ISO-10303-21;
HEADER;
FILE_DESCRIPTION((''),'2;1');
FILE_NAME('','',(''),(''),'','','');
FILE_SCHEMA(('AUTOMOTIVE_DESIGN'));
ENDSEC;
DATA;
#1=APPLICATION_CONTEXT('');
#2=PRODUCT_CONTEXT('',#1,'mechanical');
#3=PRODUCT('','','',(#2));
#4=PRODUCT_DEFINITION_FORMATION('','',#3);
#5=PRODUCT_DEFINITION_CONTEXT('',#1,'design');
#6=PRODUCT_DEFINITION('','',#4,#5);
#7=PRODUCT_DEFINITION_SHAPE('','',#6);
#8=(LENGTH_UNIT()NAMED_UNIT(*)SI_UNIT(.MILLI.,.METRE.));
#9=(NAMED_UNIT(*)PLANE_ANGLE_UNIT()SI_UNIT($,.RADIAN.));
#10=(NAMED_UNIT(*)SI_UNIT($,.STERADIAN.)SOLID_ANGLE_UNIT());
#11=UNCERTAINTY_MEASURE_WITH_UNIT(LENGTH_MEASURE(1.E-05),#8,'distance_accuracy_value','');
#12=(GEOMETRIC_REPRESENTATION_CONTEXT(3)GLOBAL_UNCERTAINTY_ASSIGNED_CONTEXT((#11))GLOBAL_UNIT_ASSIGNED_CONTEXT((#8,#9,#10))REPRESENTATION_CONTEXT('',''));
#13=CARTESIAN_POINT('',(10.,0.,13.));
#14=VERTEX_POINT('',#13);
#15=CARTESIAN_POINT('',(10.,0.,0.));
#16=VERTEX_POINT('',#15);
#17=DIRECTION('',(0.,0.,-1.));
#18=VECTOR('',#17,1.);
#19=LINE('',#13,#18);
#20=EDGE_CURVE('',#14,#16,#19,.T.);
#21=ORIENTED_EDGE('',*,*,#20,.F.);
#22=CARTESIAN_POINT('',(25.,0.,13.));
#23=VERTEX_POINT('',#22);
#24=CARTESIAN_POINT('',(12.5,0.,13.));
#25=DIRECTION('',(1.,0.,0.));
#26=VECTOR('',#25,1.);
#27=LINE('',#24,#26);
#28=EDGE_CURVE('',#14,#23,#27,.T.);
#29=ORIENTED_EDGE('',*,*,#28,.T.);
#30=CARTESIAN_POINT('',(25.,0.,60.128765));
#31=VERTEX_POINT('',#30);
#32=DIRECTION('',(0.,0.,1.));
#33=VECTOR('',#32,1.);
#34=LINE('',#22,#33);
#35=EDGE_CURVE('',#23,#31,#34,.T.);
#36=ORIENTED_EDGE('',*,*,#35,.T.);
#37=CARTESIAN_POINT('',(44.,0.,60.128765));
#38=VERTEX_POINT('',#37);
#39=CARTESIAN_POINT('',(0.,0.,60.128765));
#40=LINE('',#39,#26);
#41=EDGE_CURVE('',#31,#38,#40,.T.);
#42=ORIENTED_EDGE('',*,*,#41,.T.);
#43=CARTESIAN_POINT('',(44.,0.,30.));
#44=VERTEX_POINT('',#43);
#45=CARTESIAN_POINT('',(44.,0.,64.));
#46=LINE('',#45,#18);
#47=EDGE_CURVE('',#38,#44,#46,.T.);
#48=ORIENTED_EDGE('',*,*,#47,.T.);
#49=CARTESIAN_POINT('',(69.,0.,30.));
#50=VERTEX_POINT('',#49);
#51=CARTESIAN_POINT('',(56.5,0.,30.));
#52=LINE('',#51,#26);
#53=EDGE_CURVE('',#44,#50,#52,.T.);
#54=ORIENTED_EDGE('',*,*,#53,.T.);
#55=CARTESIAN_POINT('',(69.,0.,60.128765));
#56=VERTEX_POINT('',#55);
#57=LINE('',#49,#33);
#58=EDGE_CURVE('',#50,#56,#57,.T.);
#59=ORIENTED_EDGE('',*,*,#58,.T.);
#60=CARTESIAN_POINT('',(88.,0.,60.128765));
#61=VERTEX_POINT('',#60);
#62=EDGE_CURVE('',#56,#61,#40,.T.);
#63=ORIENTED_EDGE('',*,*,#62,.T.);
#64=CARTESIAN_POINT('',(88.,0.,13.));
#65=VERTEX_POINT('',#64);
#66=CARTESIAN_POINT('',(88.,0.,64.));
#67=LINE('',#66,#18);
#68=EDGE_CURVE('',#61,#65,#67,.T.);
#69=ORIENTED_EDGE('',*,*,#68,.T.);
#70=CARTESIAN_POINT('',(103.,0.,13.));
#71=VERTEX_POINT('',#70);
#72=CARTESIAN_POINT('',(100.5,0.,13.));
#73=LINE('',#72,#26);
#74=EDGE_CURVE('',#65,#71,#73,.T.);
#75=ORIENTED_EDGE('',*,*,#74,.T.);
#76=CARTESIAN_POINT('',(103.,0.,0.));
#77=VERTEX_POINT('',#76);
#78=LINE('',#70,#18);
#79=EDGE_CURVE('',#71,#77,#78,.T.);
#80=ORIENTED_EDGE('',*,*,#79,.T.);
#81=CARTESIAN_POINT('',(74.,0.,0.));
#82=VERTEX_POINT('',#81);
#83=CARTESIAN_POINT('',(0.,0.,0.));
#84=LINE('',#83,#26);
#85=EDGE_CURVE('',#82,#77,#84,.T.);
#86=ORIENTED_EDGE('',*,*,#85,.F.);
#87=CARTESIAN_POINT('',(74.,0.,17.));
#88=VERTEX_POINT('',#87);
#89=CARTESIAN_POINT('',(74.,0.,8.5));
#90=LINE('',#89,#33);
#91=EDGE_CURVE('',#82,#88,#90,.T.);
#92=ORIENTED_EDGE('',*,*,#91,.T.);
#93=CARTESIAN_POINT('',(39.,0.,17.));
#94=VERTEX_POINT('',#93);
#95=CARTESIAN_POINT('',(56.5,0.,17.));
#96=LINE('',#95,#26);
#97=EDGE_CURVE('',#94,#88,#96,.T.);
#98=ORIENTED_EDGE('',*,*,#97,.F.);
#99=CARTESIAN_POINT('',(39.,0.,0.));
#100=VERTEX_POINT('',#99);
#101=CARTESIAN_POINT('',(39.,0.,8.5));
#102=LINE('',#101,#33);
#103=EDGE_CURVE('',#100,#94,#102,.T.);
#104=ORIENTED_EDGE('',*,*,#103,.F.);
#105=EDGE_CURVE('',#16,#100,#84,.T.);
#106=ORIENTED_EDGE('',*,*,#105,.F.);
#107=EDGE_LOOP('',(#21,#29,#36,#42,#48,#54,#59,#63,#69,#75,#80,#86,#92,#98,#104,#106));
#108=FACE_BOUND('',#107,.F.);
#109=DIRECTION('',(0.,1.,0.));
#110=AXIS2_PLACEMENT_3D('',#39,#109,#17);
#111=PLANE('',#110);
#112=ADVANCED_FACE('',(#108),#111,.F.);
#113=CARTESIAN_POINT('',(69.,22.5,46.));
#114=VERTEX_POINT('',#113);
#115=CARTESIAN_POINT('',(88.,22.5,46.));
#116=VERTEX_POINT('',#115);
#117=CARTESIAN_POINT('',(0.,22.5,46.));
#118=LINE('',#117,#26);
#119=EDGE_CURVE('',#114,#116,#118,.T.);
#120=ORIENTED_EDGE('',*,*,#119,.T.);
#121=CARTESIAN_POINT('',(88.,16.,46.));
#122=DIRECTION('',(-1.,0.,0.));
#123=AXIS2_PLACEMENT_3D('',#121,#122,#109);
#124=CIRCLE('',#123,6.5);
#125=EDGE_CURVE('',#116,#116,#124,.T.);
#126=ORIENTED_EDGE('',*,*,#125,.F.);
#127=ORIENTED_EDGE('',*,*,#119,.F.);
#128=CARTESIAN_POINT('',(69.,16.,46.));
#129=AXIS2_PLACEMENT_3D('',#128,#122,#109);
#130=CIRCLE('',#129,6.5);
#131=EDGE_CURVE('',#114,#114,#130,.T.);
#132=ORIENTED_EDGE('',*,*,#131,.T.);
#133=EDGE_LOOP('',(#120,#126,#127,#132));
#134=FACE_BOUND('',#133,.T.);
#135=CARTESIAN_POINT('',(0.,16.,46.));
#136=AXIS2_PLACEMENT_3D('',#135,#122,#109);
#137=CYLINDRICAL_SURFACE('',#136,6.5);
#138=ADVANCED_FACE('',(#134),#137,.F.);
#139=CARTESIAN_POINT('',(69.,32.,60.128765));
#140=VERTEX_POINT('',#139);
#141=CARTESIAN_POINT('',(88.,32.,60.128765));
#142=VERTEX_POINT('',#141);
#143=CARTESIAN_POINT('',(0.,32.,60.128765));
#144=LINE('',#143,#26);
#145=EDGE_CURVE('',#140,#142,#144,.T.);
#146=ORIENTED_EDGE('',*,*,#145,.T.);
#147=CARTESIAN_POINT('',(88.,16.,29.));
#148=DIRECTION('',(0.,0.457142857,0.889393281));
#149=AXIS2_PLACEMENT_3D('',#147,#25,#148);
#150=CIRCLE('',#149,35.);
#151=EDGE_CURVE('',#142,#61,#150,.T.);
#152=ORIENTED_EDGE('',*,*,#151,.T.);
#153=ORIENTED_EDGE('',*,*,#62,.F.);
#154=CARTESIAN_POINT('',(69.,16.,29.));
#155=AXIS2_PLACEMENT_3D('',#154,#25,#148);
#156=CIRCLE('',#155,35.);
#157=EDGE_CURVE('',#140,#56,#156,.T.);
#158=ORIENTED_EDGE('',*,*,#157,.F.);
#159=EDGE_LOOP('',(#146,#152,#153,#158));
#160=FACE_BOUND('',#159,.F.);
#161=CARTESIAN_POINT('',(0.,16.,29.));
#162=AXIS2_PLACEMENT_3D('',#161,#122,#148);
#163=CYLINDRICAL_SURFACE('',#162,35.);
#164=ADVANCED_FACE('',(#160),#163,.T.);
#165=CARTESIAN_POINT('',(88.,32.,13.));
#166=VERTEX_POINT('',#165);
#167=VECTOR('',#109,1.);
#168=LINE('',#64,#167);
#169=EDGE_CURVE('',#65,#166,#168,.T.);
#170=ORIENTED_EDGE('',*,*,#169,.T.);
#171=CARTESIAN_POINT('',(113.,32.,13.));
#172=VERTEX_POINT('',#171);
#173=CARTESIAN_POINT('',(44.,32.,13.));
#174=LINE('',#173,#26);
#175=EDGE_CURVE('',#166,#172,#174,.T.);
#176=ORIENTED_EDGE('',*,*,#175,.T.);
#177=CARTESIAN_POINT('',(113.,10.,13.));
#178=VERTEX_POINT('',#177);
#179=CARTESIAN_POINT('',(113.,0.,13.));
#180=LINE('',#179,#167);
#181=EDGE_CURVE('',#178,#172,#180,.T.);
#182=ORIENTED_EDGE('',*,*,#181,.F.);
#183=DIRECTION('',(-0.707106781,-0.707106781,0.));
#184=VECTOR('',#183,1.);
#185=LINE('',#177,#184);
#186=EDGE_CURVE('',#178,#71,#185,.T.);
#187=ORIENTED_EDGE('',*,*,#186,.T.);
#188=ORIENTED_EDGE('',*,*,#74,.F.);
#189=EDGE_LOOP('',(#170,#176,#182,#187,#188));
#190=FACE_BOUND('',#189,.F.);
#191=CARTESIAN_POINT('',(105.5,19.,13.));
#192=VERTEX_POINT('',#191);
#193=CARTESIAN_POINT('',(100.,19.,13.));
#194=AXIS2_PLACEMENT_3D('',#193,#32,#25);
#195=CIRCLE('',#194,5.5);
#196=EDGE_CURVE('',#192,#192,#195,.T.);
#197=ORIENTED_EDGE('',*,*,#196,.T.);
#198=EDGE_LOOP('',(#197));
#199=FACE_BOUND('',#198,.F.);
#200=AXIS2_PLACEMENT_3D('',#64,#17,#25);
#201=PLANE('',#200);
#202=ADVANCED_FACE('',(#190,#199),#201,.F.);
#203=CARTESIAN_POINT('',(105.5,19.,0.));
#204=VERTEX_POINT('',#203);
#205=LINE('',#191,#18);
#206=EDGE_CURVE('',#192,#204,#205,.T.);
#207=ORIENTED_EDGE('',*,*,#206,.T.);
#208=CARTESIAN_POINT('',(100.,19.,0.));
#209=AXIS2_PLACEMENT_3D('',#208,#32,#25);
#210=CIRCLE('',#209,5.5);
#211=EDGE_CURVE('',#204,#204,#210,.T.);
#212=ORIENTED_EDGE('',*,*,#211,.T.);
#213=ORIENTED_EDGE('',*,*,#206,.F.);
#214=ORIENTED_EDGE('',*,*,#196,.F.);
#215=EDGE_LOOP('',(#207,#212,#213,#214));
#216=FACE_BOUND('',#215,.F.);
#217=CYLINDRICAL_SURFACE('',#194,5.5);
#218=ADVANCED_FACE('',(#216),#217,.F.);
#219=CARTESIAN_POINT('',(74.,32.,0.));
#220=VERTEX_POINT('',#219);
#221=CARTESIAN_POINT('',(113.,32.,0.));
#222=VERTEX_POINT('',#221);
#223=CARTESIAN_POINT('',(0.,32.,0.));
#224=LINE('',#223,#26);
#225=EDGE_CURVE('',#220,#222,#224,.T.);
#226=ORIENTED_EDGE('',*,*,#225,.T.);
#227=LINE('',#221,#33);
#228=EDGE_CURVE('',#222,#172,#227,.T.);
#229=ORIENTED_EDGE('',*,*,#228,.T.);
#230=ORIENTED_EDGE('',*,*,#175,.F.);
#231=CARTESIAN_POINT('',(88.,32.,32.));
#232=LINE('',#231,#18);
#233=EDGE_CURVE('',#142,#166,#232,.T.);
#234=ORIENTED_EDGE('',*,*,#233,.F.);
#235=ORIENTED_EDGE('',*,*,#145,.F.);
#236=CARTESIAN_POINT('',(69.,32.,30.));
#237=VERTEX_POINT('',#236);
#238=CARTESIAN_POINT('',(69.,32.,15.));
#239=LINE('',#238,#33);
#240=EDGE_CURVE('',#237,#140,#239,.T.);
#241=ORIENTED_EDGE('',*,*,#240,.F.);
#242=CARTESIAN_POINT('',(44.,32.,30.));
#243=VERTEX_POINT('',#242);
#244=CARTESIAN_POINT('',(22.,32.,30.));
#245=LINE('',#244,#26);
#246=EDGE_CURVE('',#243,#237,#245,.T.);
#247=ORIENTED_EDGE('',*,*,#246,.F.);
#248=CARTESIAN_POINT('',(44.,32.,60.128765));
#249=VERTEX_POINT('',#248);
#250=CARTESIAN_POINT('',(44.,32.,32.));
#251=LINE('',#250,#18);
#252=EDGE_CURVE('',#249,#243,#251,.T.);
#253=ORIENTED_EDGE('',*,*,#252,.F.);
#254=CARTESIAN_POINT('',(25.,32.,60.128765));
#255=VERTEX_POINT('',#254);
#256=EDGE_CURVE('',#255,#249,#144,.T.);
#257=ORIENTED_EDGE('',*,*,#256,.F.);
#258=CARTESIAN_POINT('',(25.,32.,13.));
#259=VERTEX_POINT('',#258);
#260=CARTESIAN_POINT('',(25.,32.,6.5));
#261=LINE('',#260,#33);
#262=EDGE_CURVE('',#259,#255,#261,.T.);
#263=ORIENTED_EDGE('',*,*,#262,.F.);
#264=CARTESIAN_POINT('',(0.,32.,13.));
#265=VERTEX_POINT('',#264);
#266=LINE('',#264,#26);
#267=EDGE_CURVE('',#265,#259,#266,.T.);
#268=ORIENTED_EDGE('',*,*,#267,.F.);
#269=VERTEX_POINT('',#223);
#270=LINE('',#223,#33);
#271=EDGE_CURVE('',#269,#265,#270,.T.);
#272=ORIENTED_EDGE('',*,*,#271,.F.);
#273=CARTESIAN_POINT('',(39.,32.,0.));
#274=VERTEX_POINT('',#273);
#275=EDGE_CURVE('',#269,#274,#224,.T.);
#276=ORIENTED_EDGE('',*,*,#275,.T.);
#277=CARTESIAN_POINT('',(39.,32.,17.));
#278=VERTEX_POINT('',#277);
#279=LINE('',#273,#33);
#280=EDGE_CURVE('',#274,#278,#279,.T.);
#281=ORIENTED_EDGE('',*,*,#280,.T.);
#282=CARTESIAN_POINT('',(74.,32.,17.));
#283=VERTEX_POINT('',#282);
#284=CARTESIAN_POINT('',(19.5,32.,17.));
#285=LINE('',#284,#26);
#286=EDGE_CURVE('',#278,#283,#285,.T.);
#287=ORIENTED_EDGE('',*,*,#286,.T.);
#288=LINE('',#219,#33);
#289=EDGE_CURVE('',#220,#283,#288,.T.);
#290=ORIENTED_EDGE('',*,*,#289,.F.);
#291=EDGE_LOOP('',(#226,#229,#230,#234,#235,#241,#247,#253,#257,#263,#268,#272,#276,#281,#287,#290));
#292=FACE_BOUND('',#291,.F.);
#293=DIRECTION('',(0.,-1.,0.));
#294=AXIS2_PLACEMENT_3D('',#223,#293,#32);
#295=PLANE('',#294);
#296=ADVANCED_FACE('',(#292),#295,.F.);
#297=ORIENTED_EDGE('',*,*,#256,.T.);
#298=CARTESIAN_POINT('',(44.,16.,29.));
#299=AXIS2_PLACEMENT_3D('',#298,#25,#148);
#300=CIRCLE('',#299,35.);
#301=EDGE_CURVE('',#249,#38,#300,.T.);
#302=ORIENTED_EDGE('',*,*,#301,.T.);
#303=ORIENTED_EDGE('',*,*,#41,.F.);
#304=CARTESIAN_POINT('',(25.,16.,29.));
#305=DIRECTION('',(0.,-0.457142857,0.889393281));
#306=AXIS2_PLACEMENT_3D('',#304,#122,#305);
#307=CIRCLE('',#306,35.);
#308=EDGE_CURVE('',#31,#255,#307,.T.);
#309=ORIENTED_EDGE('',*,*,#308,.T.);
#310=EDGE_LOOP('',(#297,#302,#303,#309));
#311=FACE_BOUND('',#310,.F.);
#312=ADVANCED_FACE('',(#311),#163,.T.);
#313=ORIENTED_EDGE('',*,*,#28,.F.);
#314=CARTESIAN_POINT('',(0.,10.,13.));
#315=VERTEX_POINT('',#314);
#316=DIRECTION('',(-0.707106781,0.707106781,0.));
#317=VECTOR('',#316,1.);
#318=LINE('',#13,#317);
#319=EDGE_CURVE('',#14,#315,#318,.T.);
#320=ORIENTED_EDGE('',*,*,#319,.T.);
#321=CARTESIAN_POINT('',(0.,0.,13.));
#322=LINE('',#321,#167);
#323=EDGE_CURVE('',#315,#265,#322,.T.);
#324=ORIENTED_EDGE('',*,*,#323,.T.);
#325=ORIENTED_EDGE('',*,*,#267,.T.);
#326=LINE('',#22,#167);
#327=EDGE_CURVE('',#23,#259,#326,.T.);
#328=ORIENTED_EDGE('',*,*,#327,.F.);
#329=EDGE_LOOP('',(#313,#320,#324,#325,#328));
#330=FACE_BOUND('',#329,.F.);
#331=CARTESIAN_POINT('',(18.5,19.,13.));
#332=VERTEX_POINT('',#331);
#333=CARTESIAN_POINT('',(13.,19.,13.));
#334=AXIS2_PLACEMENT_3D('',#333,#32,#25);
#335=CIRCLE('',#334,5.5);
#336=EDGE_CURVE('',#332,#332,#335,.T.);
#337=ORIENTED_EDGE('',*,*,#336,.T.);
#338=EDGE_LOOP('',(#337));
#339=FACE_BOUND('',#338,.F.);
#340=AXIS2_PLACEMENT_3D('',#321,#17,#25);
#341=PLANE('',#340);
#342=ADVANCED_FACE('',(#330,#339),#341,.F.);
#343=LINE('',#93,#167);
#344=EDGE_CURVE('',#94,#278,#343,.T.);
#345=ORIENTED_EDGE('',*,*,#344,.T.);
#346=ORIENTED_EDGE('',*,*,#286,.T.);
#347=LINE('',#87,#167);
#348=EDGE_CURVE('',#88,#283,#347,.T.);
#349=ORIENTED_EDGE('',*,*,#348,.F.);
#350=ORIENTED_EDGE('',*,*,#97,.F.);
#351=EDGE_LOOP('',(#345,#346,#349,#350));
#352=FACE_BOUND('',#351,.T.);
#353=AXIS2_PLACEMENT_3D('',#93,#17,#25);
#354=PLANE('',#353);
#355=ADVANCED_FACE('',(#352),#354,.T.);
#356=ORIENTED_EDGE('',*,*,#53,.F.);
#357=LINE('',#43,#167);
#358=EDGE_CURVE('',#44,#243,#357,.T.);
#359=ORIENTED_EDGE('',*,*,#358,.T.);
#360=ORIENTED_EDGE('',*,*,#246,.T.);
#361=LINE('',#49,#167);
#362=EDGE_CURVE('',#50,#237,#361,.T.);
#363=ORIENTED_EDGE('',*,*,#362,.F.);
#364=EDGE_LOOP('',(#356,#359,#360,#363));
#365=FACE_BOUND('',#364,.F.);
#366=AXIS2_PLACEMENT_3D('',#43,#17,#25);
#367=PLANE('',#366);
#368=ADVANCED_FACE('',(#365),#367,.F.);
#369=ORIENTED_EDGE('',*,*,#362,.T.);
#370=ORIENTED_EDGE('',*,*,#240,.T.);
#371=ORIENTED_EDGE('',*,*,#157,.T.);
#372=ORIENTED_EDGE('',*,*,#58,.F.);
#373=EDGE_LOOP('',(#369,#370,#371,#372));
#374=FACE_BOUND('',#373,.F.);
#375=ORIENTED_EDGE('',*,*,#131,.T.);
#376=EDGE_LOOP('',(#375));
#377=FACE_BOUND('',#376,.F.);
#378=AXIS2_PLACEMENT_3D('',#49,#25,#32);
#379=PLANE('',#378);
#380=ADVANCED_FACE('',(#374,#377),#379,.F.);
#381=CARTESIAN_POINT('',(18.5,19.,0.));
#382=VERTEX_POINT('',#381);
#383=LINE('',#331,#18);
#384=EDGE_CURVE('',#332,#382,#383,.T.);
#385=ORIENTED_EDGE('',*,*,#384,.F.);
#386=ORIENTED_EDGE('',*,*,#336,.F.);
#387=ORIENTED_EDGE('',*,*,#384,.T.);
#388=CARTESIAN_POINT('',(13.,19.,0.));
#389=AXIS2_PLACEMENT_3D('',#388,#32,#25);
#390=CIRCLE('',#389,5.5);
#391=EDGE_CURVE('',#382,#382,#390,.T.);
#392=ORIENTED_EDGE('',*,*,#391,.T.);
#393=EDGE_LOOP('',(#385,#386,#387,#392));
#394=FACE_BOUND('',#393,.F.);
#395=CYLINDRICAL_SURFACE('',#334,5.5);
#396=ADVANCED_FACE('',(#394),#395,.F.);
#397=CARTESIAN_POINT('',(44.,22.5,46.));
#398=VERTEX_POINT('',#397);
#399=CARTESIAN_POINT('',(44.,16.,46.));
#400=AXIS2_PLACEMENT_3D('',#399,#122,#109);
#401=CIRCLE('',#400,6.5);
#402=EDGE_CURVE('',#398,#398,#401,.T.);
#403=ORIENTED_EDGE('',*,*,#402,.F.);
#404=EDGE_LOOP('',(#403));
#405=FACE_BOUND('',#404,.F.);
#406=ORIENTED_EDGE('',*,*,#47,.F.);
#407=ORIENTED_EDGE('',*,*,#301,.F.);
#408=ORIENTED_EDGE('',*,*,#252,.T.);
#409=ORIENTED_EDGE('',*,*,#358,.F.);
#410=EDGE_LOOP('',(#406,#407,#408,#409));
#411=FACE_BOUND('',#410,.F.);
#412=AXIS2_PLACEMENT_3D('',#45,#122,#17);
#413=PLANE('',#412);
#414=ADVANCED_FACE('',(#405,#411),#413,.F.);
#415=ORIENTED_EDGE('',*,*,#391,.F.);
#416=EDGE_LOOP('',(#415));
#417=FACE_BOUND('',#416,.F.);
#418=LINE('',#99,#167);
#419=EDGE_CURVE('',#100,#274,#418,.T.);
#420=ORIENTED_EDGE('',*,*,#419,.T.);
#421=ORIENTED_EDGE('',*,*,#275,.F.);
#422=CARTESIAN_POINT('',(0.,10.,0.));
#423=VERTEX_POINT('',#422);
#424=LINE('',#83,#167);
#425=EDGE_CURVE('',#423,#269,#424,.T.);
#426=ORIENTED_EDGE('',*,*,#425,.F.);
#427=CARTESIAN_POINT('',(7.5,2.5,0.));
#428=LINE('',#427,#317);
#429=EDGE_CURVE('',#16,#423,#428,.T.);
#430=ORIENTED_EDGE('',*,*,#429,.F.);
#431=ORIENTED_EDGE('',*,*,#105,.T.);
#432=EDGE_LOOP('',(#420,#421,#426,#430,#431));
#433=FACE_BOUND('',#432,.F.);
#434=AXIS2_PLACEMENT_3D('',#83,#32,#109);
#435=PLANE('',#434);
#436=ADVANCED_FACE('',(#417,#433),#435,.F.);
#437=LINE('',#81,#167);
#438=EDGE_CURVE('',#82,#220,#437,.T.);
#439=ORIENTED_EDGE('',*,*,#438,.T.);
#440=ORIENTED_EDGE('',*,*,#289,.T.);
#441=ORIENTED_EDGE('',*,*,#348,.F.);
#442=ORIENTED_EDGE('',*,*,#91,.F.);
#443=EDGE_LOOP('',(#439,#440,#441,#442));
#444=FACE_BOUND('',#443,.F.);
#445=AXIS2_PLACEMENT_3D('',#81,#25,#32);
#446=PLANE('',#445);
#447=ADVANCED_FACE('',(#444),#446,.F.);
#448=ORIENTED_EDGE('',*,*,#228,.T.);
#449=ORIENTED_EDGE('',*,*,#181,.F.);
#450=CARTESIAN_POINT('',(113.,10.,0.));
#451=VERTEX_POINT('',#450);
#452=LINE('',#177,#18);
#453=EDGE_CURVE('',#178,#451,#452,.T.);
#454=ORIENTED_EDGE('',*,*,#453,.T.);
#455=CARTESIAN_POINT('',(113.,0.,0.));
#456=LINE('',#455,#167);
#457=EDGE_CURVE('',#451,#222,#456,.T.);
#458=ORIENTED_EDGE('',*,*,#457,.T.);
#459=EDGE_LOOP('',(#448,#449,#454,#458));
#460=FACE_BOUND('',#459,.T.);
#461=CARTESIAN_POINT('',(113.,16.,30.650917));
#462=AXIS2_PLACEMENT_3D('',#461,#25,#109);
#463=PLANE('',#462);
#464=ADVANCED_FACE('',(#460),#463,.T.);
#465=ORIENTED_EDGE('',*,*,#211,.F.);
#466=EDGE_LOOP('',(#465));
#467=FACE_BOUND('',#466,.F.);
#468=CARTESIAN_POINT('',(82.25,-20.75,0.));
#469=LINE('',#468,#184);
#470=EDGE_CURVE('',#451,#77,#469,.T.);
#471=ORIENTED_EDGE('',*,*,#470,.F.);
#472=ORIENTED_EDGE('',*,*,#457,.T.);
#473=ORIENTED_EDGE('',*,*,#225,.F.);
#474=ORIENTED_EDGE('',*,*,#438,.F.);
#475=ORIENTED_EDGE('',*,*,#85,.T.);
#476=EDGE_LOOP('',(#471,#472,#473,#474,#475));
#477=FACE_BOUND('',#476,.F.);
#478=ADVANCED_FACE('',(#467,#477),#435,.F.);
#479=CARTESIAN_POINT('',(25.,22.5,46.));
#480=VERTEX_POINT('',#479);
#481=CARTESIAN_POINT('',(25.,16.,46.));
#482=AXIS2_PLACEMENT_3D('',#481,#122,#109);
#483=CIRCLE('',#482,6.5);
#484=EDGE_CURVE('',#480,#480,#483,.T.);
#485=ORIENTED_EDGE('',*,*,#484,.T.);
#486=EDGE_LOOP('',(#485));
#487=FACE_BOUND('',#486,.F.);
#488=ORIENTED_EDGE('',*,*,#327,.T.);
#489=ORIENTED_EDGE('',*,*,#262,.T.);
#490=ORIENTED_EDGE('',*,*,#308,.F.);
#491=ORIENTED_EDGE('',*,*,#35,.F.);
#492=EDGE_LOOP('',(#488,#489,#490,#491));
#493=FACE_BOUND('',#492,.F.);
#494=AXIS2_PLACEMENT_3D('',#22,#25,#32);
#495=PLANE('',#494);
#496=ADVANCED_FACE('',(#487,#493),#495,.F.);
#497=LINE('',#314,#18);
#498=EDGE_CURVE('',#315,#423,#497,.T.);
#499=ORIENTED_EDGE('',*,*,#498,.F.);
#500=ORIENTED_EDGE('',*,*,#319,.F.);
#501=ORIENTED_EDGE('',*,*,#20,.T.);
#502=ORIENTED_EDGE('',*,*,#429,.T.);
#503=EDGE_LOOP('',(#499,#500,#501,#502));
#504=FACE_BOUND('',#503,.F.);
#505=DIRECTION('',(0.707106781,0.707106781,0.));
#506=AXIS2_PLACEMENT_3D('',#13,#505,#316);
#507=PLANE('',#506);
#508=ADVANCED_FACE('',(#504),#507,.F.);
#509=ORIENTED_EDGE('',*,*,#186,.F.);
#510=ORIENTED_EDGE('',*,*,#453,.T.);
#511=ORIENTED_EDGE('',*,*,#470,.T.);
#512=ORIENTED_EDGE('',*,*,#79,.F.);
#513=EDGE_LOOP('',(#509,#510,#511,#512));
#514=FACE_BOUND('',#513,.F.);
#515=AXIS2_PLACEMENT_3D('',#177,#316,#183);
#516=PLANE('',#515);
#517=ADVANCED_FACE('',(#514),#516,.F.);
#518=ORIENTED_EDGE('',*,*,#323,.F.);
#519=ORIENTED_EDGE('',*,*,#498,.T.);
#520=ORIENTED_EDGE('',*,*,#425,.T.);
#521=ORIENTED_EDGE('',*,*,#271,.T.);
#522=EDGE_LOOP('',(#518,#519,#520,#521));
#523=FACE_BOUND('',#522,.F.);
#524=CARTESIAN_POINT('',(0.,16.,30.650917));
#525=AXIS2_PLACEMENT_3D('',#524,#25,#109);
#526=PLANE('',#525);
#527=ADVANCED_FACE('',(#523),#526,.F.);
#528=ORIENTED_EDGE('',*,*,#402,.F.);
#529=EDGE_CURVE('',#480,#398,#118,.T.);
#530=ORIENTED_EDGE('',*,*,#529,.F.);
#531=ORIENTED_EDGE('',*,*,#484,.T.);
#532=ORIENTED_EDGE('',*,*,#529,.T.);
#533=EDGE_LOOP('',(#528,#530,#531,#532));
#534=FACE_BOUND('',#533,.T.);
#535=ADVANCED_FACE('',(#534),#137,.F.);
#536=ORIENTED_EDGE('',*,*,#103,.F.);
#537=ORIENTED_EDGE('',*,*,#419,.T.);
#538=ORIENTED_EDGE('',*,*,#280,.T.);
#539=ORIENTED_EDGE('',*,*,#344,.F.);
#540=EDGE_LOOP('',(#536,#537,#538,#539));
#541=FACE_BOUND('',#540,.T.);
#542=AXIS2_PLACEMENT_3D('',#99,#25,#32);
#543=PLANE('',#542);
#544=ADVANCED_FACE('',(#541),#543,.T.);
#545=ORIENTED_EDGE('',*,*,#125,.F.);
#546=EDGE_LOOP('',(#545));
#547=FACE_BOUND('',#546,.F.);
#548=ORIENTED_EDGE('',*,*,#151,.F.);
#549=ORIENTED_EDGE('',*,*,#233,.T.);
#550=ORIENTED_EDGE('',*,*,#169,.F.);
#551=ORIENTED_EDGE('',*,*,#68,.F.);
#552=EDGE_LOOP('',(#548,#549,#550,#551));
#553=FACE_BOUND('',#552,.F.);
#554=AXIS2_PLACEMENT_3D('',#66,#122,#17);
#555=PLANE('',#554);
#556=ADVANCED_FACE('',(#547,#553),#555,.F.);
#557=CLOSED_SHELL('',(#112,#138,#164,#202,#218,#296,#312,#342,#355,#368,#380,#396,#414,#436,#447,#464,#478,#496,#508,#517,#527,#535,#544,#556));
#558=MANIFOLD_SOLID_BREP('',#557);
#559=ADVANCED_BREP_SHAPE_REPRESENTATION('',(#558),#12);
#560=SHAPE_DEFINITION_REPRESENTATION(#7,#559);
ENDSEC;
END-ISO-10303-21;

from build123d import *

# Parameters (mm, degrees)
F0_R     = 6.5
F1_DEPTH = 113
F2_W     = 25
F2_H     = 3.8712351675
F2_H_2   = 47.1287648325
F2_H_3   = 30.1287648325
F2_W_2   = 35
F2_H_4   = 17
F3_DEPTH = 32.001
F4_R     = 5.5
F5_DEPTH = 13.001


with BuildPart() as f1:
    # F0 (on Right) → F1 (new body)
    with BuildSketch(Plane.YZ):
        with BuildLine():
            Line((0, 60.1287648325), (0, 0))
            Line((0, 0), (32, 0))
            Line((32, 0), (32, 60.1287648325))
            ThreePointArc((32, 60.1287648325), (16, 64), (0, 60.1287648325))
        make_face()
        with Locations((16, 46)):
            Circle(F0_R, mode=Mode.SUBTRACT)
    extrude(amount=F1_DEPTH)

    # F2 (on face) → F3 (cut, through all)
    with BuildSketch(Plane.XZ):
        with Locations((12.5, 62.0643824163)):
            Rectangle(F2_W, F2_H)
        with Locations((12.5, 36.5643824163)):
            Rectangle(F2_W, F2_H_2)
        with Locations((56.5, 45.0643824163)):
            Rectangle(F2_W, F2_H_3)
        with Locations((56.5, 62.0643824163)):
            Rectangle(F2_W, F2_H)
        with Locations((100.5, 62.0643824163)):
            Rectangle(F2_W, F2_H)
        with Locations((100.5, 36.5643824163)):
            Rectangle(F2_W, F2_H_2)
        with Locations((56.5, 8.5)):
            Rectangle(F2_W_2, F2_H_4)
    extrude(amount=-F3_DEPTH, mode=Mode.SUBTRACT)

    # F4 (on face) → F5 (cut, through all)
    with BuildSketch(Plane.XY.offset(13)):
        Polygon((103, 0), (113, 0), (113, 10), align=None)
        with Locations((100, 19)):
            Circle(F4_R)
        with Locations((13, 19)):
            Circle(F4_R)
        Polygon((0, 10), (0, 0), (10, 0), align=None)
    extrude(amount=-F5_DEPTH, mode=Mode.SUBTRACT)


solid = f1.part
